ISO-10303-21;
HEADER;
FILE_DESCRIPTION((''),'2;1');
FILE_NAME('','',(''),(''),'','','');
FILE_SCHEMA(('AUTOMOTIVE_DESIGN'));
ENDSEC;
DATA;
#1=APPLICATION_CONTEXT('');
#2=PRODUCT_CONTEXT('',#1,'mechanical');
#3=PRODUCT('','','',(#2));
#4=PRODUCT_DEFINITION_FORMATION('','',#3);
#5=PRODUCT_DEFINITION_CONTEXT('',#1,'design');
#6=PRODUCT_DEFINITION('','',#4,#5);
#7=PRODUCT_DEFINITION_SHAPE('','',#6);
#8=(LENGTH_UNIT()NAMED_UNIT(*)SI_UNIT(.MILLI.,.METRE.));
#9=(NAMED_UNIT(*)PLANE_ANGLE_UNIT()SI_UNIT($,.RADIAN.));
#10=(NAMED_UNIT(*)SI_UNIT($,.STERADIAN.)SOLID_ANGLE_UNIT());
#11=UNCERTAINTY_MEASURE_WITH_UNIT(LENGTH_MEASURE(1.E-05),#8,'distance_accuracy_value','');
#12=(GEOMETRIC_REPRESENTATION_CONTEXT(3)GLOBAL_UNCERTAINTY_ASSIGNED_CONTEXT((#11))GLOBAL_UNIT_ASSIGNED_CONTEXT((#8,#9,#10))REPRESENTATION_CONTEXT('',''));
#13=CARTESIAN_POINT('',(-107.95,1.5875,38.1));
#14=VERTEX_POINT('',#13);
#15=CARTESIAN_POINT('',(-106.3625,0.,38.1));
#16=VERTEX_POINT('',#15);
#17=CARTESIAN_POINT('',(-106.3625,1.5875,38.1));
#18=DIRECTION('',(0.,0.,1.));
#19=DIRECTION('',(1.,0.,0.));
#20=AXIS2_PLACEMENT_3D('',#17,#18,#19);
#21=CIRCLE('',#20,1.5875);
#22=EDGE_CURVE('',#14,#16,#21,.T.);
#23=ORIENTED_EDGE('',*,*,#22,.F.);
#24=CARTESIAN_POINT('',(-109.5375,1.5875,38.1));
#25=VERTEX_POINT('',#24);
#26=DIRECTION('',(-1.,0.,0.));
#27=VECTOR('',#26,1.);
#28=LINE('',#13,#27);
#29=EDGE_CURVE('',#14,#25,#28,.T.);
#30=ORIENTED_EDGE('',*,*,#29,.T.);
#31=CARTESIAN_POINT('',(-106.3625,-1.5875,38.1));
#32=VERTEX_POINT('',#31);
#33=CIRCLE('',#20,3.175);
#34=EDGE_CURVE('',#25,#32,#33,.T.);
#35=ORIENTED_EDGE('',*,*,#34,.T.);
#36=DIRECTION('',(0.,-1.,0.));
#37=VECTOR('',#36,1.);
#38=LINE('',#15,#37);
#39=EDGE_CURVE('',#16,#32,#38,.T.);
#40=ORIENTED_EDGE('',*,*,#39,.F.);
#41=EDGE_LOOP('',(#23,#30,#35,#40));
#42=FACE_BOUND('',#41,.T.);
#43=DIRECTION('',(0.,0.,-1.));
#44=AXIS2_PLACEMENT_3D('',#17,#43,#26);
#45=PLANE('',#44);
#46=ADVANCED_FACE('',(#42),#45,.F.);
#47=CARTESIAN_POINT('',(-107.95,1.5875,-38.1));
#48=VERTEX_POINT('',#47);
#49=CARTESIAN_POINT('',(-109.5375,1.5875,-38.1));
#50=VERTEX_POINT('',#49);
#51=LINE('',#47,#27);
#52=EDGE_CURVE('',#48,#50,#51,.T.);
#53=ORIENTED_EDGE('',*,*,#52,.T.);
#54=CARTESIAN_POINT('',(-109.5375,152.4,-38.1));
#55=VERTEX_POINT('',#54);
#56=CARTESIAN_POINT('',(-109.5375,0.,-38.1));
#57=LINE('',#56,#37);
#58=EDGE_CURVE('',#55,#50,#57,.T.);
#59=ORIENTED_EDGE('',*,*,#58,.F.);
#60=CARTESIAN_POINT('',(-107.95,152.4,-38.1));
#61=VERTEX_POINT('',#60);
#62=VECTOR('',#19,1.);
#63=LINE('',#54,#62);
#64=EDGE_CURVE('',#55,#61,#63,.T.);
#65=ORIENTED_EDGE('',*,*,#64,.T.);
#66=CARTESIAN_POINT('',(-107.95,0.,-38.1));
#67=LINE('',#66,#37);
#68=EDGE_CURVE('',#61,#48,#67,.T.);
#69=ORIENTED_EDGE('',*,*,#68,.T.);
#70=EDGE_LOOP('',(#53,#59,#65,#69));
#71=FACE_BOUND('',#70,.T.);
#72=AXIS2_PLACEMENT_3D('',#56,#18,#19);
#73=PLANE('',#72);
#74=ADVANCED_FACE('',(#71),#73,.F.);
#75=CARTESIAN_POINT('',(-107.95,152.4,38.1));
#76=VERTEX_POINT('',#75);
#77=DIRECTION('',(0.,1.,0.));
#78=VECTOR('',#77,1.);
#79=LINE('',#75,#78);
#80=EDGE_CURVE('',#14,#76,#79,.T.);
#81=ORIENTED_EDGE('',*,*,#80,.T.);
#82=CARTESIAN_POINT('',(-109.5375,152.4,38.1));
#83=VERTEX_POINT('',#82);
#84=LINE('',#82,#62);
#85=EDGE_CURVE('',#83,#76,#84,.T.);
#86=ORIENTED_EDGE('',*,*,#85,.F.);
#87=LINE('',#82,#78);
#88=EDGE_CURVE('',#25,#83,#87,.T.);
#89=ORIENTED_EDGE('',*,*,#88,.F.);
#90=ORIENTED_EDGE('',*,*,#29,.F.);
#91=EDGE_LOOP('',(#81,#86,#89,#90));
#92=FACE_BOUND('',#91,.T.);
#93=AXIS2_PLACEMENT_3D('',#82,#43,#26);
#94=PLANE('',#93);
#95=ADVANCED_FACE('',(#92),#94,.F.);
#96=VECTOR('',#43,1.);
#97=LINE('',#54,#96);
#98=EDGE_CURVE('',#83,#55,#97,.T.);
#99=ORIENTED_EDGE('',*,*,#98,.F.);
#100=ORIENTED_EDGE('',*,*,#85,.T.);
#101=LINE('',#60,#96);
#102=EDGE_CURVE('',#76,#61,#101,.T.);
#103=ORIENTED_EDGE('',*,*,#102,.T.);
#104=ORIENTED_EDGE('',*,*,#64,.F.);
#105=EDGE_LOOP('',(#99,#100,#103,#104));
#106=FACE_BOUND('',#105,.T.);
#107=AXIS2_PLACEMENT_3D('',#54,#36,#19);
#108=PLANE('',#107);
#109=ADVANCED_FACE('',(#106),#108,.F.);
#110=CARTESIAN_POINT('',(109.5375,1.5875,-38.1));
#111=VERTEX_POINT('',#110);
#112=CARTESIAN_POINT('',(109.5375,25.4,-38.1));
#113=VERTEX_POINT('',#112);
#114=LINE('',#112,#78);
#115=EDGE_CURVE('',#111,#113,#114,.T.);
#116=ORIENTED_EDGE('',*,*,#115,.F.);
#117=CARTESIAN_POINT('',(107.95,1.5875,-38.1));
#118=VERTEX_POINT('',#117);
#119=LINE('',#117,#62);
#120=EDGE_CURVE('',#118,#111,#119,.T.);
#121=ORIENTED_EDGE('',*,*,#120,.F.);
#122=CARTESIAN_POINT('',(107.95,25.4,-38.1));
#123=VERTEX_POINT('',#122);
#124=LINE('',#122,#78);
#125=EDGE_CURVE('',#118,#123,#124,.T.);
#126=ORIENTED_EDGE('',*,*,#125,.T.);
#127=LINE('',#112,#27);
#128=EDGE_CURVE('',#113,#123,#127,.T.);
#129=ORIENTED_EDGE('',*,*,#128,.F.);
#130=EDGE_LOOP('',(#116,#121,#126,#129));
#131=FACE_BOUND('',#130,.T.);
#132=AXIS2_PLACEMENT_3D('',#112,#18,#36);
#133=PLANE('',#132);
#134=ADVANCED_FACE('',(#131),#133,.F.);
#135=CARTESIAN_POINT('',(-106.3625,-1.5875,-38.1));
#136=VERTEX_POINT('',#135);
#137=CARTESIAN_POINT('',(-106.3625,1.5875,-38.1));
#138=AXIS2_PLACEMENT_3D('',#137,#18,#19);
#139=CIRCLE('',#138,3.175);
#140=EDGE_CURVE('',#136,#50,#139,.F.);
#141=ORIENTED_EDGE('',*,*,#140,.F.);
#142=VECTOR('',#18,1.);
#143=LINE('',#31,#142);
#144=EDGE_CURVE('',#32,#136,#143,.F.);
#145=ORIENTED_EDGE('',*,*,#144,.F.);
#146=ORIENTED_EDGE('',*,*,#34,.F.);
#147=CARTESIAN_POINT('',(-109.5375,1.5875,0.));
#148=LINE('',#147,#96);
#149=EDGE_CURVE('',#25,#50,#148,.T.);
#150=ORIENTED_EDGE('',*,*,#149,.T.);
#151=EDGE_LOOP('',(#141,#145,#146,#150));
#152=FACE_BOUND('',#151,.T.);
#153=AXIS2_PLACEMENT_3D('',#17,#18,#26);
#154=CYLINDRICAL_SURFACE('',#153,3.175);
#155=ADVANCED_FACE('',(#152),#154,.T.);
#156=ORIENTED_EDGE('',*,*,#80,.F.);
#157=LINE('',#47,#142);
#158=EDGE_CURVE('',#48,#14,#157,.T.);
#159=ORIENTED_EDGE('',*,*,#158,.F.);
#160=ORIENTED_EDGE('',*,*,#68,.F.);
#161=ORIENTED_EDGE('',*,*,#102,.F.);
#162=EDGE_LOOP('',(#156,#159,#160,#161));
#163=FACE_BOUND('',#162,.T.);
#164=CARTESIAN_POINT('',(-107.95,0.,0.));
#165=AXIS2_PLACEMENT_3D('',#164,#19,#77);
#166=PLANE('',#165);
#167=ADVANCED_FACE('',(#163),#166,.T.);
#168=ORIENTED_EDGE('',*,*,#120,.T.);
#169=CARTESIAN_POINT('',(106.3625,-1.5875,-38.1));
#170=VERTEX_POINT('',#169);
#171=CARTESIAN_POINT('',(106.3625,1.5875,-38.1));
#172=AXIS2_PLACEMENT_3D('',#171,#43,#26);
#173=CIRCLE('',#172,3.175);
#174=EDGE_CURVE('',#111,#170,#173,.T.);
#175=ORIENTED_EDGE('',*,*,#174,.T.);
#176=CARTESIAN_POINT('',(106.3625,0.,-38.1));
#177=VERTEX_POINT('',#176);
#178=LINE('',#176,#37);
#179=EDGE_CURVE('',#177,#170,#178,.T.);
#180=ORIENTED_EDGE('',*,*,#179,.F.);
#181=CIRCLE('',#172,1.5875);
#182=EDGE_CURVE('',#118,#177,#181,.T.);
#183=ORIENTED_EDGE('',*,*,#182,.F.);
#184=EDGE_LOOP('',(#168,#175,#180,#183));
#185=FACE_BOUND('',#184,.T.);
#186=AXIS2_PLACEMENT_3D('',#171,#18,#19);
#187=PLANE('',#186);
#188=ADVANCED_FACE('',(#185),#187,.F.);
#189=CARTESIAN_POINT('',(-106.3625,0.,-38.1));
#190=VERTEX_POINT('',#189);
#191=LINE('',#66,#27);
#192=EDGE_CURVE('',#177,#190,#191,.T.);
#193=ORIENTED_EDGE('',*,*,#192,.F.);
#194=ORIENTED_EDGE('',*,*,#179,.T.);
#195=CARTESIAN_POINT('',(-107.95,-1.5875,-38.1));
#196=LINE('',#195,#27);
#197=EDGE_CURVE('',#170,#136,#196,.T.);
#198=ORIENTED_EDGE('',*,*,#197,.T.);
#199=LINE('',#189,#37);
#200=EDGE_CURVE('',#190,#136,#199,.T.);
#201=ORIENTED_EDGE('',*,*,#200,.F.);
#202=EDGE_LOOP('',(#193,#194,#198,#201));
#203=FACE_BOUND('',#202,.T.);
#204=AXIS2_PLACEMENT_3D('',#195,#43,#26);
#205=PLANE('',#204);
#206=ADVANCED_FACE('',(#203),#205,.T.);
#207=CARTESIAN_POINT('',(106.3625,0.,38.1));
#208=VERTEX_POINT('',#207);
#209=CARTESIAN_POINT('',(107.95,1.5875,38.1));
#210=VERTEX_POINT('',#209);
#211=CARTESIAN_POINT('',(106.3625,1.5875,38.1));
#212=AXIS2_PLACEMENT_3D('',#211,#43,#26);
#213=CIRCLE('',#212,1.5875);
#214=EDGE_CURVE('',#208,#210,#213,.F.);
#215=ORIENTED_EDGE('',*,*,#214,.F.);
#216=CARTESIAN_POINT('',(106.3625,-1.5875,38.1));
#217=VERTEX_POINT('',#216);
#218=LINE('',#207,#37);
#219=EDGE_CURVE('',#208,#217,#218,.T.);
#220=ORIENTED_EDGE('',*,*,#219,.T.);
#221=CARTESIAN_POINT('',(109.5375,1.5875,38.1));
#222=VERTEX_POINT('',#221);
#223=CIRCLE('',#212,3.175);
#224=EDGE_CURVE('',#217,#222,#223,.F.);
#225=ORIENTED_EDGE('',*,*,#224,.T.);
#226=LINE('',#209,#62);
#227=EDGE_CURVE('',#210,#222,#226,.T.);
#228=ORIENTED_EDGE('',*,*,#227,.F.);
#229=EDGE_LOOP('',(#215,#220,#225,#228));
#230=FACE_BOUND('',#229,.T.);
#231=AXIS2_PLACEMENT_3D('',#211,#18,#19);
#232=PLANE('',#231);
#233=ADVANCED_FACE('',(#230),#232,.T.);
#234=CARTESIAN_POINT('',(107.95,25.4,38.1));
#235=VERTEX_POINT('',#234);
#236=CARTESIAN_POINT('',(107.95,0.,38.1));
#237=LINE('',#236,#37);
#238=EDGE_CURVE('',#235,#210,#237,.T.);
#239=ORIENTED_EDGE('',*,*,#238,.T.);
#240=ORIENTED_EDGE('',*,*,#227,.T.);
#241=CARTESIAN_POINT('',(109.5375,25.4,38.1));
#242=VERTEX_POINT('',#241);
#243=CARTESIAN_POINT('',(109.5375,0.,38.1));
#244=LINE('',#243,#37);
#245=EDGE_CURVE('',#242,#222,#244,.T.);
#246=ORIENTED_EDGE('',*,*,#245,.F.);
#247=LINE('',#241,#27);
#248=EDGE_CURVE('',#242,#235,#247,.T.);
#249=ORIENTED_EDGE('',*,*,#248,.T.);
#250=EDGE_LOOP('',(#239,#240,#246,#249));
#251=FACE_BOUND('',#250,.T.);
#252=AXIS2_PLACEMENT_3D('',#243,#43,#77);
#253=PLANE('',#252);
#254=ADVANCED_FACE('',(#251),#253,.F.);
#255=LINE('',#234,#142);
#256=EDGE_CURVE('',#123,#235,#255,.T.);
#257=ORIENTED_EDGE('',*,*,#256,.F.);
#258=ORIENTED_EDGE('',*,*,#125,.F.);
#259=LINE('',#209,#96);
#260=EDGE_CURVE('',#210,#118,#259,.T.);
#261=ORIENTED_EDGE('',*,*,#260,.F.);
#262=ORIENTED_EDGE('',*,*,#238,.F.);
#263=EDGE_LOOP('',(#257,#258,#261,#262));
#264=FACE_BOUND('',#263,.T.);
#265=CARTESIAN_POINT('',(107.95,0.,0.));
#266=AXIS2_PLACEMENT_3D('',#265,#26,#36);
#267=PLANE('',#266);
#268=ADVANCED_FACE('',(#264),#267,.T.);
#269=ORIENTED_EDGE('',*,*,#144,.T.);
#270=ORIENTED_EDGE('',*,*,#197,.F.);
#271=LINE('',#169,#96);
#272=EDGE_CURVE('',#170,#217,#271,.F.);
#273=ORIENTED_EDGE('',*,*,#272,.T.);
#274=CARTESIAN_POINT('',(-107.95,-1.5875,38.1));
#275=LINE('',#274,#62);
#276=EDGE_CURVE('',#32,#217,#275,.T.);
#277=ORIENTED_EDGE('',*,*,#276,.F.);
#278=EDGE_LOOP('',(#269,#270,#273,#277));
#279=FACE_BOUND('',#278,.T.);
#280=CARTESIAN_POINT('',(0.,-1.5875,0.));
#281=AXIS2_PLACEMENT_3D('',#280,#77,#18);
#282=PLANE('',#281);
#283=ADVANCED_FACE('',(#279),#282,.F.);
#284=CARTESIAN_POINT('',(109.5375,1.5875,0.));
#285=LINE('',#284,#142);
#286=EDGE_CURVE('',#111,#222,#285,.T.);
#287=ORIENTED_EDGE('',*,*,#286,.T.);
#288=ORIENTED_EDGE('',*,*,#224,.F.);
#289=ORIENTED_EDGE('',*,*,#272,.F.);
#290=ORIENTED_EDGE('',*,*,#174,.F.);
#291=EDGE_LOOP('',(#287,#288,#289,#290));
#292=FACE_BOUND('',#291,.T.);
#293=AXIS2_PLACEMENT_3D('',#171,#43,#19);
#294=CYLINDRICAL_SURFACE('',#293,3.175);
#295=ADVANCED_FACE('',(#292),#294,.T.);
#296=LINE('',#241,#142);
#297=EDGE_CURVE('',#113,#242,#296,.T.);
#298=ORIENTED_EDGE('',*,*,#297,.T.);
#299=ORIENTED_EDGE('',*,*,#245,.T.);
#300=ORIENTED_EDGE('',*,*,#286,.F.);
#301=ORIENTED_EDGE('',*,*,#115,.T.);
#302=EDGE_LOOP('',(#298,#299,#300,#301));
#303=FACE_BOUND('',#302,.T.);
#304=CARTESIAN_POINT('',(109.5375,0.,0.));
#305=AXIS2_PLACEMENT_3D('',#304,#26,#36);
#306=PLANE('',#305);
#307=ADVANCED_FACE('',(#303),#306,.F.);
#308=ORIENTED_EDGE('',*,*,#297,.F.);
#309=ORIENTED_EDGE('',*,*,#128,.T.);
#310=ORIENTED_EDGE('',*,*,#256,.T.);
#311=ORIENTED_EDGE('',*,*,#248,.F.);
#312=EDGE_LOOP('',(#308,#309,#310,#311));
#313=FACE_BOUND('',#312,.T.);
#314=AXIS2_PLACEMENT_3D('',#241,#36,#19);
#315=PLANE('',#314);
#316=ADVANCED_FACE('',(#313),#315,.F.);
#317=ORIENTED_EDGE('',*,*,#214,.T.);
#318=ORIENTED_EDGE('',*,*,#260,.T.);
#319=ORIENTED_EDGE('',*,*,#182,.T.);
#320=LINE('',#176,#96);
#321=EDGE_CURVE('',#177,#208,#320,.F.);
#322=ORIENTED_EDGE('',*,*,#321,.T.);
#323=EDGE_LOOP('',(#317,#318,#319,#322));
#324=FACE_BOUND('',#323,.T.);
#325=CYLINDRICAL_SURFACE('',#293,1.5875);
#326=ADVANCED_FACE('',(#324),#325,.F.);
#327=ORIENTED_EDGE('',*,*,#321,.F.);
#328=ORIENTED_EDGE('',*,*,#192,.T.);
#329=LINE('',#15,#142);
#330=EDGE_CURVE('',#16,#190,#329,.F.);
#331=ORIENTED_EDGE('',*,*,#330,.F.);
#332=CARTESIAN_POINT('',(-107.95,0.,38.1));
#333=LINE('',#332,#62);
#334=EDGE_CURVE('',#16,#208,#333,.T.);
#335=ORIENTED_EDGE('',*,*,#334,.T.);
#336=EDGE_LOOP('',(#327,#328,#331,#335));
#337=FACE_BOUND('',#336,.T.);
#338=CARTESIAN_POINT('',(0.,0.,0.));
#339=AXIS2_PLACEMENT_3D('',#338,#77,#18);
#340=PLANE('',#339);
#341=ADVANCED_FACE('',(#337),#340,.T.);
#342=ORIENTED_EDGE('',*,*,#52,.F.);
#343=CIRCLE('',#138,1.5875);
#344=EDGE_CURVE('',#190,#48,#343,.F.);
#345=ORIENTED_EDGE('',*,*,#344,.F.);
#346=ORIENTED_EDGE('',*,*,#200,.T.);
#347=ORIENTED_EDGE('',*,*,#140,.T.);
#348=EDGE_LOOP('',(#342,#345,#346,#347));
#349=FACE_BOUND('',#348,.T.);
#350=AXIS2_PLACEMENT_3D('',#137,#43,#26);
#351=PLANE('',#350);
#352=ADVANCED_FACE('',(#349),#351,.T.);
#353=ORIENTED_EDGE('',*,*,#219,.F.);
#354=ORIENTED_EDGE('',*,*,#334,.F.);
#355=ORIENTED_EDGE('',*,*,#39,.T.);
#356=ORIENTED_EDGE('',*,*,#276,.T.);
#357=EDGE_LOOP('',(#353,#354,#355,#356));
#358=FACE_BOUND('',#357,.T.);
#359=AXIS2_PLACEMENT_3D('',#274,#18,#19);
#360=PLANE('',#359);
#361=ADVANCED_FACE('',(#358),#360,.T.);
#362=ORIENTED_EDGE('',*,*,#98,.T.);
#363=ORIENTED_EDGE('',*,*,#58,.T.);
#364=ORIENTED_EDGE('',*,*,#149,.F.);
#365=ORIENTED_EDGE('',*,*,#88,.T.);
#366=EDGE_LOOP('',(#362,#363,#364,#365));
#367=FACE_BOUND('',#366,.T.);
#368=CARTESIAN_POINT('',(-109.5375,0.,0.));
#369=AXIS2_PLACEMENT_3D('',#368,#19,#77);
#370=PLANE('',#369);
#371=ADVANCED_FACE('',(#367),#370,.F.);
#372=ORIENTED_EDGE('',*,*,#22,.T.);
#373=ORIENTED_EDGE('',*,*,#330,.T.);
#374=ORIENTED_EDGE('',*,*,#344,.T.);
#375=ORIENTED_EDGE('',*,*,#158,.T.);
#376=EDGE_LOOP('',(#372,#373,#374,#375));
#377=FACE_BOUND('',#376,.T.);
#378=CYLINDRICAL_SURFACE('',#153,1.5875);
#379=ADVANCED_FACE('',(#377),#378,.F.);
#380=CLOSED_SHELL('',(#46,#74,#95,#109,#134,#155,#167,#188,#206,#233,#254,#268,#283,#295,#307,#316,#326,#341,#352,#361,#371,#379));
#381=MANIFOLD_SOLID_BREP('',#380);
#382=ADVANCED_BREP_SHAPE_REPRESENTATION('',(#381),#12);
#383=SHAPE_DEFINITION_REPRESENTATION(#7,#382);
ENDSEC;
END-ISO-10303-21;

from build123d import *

# Parameters (mm, degrees)
SKETCH1_W                    = 215.9
SKETCH1_H                    = 76.2
BASE_FLANGE1_DEPTH           = 1.5875
EDGE_FLANGE1_STRIP_W         = 9.525
EDGE_FLANGE1_STRIP_H         = 1.5875
EDGE_FLANGE1_STRIP_CUT_DEPTH = 76.2
EDGE_FLANGE1_DEPTH           = 76.2
EDGE_FLANGE3_STRIP_W         = 9.525
EDGE_FLANGE3_STRIP_H         = 1.5875
EDGE_FLANGE3_STRIP_CUT_DEPTH = 76.2
EDGE_FLANGE3_DEPTH           = 76.2


# Sheet-metal steps are written as plain solids
with BuildPart() as part:
    # Sketch1 → Base-Flange1 (new body)
    with BuildSketch(Plane(origin=(0, 0, 0), x_dir=(1, 0, 0), z_dir=(0, 1, 0))):
        Rectangle(SKETCH1_W, SKETCH1_H)
    extrude(amount=-BASE_FLANGE1_DEPTH)

    # Edge-Flange1 strip (across the edge) → Edge-Flange1 strip cut (cut)
    with BuildSketch(Plane(origin=(-107.95, 0, -38.1), x_dir=(1, 0, 0), z_dir=(0, 0, 1))):
        with Locations((-3.175, -0.79375)):
            Rectangle(EDGE_FLANGE1_STRIP_W, EDGE_FLANGE1_STRIP_H)
    extrude(amount=EDGE_FLANGE1_STRIP_CUT_DEPTH, mode=Mode.SUBTRACT)

    # Edge-Flange1 section (across the edge) → Edge-Flange1 (add)
    with BuildSketch(Plane(origin=(-107.95, 0, -38.1), x_dir=(1, 0, 0), z_dir=(0, 0, 1))):
        with BuildLine():
            Line((-1.5875, 1.5875), (-1.5875, 152.4))
            Line((-1.5875, 152.4), (0, 152.4))
            Line((0, 152.4), (0, 1.5875))
            ThreePointArc((0, 1.5875), (0.464967985, 0.464967985), (1.5875, 0))
            Line((1.5875, 0), (1.5875, -1.5875))
            ThreePointArc((1.5875, -1.5875), (-0.65756403, -0.65756403), (-1.5875, 1.5875))
        make_face()
    extrude(amount=EDGE_FLANGE1_DEPTH)

    # Edge-Flange3 strip (across the edge) → Edge-Flange3 strip cut (cut)
    with BuildSketch(Plane(origin=(107.95, 0, 38.1), x_dir=(-1, 0, 0), z_dir=(0, 0, -1))):
        with Locations((-3.175, -0.79375)):
            Rectangle(EDGE_FLANGE3_STRIP_W, EDGE_FLANGE3_STRIP_H)
    extrude(amount=EDGE_FLANGE3_STRIP_CUT_DEPTH, mode=Mode.SUBTRACT)

    # Edge-Flange3 section (across the edge) → Edge-Flange3 (add)
    with BuildSketch(Plane(origin=(107.95, 0, 38.1), x_dir=(-1, 0, 0), z_dir=(0, 0, -1))):
        with BuildLine():
            Line((-1.5875, 1.5875), (-1.5875, 25.4))
            Line((-1.5875, 25.4), (0, 25.4))
            Line((0, 25.4), (0, 1.5875))
            ThreePointArc((0, 1.5875), (0.464967985, 0.464967985), (1.5875, 0))
            Line((1.5875, 0), (1.5875, -1.5875))
            ThreePointArc((1.5875, -1.5875), (-0.65756403, -0.65756403), (-1.5875, 1.5875))
        make_face()
    extrude(amount=EDGE_FLANGE3_DEPTH)


solid = part.part
